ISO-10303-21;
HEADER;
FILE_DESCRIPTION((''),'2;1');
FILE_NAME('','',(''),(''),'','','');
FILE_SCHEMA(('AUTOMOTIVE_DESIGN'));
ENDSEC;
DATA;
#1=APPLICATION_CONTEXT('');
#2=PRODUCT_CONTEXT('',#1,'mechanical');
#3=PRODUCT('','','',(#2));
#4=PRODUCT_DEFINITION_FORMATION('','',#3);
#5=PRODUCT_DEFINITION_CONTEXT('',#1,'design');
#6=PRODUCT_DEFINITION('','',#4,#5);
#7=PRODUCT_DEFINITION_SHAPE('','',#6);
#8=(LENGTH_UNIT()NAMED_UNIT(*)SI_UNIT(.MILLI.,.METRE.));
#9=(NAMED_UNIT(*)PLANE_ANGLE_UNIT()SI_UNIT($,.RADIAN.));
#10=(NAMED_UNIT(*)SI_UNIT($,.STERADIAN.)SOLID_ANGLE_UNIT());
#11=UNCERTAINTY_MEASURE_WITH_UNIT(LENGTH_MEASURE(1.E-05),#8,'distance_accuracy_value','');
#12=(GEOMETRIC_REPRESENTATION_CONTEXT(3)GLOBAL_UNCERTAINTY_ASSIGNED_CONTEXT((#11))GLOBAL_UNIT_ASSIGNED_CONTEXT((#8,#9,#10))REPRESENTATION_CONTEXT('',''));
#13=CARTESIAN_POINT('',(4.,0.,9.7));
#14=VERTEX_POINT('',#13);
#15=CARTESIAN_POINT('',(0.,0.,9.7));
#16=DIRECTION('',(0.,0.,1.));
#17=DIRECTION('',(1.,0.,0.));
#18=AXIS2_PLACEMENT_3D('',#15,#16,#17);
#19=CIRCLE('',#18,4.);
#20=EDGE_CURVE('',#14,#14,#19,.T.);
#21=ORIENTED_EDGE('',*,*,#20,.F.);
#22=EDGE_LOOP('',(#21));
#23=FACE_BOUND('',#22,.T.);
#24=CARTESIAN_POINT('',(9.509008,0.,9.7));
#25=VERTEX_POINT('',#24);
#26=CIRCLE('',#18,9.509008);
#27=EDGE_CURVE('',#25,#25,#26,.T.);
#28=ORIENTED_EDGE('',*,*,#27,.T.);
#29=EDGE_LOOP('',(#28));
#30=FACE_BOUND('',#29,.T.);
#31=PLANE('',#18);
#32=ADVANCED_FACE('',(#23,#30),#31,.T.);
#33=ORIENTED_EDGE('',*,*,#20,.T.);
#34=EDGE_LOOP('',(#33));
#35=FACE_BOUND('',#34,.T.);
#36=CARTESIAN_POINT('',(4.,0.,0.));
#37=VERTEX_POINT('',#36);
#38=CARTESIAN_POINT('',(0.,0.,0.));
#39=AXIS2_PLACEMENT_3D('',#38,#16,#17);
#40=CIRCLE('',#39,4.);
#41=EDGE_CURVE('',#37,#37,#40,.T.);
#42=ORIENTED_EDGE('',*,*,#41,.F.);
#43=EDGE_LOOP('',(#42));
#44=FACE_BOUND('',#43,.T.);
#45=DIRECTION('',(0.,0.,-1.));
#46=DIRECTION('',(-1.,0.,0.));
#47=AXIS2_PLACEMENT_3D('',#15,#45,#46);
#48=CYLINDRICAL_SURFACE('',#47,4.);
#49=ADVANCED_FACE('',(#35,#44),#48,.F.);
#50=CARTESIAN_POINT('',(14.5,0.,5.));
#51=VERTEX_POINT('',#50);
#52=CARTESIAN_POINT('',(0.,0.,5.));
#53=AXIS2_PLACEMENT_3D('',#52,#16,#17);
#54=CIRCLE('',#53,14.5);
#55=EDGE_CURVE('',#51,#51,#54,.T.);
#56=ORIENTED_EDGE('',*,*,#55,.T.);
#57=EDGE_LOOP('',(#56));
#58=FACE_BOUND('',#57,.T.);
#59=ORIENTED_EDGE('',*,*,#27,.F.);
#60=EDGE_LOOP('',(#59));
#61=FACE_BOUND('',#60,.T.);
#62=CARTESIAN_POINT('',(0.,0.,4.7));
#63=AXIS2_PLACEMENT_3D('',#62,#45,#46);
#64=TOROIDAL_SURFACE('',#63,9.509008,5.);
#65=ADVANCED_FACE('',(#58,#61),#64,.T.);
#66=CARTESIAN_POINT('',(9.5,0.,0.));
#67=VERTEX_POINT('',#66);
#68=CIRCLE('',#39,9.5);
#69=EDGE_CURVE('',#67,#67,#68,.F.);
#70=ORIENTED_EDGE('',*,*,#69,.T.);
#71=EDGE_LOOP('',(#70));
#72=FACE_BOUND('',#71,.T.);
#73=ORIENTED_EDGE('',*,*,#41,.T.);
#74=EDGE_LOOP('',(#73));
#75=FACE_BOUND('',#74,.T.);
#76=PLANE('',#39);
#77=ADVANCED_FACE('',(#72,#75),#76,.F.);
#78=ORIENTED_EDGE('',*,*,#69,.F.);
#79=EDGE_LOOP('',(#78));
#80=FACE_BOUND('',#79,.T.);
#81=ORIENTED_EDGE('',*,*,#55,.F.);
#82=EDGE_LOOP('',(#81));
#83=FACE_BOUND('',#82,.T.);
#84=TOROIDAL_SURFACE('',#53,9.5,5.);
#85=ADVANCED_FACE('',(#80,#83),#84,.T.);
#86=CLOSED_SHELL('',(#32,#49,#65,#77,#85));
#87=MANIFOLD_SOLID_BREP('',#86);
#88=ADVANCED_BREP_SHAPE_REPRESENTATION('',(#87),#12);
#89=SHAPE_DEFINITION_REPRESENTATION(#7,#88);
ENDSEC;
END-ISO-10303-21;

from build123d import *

# Parameters (mm, degrees)
SKETCH1_R           = 14.5
SKETCH1_R_2         = 4
BOSS_EXTRUDE1_DEPTH = 9.7
FILLET1_R           = 5
FILLET2_R           = 5


with BuildPart() as part:
    # Sketch1 → Boss-Extrude1 (new body)
    with BuildSketch(Plane.XY):
        Circle(SKETCH1_R)
        Circle(SKETCH1_R_2, mode=Mode.SUBTRACT)
    extrude(amount=BOSS_EXTRUDE1_DEPTH)

    # Fillet1
    fillet1_edges = [part.edges().sort_by_distance(p)[0] for p in [
        (-14.5, 0, 0),
    ]]
    fillet(fillet1_edges, radius=FILLET1_R)

    # Fillet2
    # the kernel refuses this fillet: 5 mm, written as the material it takes off along each edge
    with BuildSketch(Plane(origin=(0, 0, 9.7), x_dir=(1, 0, 0), z_dir=(0, -1, 0))) as fillet2_piece_1:
        with BuildLine():
            CenterArc((9.509008115, -5), FILLET2_R, 3.439812768, 86.560187232)
            Line((9.509008115, 0), (9.509008115, 0.1))
            Line((9.509008115, 0.1), (14.5, 0.1))
            Line((14.5, 0.1), (14.6, 0))
            ThreePointArc((14.6, 0), (14.6, -2.35), (14.599819838, -4.694))
            Line((14.599819838, -4.694), (14.5, -4.7))
        make_face()
    revolve(axis=Axis((0, 0, 9.7), (0, 0, 1)), mode=Mode.SUBTRACT)


solid = part.part
